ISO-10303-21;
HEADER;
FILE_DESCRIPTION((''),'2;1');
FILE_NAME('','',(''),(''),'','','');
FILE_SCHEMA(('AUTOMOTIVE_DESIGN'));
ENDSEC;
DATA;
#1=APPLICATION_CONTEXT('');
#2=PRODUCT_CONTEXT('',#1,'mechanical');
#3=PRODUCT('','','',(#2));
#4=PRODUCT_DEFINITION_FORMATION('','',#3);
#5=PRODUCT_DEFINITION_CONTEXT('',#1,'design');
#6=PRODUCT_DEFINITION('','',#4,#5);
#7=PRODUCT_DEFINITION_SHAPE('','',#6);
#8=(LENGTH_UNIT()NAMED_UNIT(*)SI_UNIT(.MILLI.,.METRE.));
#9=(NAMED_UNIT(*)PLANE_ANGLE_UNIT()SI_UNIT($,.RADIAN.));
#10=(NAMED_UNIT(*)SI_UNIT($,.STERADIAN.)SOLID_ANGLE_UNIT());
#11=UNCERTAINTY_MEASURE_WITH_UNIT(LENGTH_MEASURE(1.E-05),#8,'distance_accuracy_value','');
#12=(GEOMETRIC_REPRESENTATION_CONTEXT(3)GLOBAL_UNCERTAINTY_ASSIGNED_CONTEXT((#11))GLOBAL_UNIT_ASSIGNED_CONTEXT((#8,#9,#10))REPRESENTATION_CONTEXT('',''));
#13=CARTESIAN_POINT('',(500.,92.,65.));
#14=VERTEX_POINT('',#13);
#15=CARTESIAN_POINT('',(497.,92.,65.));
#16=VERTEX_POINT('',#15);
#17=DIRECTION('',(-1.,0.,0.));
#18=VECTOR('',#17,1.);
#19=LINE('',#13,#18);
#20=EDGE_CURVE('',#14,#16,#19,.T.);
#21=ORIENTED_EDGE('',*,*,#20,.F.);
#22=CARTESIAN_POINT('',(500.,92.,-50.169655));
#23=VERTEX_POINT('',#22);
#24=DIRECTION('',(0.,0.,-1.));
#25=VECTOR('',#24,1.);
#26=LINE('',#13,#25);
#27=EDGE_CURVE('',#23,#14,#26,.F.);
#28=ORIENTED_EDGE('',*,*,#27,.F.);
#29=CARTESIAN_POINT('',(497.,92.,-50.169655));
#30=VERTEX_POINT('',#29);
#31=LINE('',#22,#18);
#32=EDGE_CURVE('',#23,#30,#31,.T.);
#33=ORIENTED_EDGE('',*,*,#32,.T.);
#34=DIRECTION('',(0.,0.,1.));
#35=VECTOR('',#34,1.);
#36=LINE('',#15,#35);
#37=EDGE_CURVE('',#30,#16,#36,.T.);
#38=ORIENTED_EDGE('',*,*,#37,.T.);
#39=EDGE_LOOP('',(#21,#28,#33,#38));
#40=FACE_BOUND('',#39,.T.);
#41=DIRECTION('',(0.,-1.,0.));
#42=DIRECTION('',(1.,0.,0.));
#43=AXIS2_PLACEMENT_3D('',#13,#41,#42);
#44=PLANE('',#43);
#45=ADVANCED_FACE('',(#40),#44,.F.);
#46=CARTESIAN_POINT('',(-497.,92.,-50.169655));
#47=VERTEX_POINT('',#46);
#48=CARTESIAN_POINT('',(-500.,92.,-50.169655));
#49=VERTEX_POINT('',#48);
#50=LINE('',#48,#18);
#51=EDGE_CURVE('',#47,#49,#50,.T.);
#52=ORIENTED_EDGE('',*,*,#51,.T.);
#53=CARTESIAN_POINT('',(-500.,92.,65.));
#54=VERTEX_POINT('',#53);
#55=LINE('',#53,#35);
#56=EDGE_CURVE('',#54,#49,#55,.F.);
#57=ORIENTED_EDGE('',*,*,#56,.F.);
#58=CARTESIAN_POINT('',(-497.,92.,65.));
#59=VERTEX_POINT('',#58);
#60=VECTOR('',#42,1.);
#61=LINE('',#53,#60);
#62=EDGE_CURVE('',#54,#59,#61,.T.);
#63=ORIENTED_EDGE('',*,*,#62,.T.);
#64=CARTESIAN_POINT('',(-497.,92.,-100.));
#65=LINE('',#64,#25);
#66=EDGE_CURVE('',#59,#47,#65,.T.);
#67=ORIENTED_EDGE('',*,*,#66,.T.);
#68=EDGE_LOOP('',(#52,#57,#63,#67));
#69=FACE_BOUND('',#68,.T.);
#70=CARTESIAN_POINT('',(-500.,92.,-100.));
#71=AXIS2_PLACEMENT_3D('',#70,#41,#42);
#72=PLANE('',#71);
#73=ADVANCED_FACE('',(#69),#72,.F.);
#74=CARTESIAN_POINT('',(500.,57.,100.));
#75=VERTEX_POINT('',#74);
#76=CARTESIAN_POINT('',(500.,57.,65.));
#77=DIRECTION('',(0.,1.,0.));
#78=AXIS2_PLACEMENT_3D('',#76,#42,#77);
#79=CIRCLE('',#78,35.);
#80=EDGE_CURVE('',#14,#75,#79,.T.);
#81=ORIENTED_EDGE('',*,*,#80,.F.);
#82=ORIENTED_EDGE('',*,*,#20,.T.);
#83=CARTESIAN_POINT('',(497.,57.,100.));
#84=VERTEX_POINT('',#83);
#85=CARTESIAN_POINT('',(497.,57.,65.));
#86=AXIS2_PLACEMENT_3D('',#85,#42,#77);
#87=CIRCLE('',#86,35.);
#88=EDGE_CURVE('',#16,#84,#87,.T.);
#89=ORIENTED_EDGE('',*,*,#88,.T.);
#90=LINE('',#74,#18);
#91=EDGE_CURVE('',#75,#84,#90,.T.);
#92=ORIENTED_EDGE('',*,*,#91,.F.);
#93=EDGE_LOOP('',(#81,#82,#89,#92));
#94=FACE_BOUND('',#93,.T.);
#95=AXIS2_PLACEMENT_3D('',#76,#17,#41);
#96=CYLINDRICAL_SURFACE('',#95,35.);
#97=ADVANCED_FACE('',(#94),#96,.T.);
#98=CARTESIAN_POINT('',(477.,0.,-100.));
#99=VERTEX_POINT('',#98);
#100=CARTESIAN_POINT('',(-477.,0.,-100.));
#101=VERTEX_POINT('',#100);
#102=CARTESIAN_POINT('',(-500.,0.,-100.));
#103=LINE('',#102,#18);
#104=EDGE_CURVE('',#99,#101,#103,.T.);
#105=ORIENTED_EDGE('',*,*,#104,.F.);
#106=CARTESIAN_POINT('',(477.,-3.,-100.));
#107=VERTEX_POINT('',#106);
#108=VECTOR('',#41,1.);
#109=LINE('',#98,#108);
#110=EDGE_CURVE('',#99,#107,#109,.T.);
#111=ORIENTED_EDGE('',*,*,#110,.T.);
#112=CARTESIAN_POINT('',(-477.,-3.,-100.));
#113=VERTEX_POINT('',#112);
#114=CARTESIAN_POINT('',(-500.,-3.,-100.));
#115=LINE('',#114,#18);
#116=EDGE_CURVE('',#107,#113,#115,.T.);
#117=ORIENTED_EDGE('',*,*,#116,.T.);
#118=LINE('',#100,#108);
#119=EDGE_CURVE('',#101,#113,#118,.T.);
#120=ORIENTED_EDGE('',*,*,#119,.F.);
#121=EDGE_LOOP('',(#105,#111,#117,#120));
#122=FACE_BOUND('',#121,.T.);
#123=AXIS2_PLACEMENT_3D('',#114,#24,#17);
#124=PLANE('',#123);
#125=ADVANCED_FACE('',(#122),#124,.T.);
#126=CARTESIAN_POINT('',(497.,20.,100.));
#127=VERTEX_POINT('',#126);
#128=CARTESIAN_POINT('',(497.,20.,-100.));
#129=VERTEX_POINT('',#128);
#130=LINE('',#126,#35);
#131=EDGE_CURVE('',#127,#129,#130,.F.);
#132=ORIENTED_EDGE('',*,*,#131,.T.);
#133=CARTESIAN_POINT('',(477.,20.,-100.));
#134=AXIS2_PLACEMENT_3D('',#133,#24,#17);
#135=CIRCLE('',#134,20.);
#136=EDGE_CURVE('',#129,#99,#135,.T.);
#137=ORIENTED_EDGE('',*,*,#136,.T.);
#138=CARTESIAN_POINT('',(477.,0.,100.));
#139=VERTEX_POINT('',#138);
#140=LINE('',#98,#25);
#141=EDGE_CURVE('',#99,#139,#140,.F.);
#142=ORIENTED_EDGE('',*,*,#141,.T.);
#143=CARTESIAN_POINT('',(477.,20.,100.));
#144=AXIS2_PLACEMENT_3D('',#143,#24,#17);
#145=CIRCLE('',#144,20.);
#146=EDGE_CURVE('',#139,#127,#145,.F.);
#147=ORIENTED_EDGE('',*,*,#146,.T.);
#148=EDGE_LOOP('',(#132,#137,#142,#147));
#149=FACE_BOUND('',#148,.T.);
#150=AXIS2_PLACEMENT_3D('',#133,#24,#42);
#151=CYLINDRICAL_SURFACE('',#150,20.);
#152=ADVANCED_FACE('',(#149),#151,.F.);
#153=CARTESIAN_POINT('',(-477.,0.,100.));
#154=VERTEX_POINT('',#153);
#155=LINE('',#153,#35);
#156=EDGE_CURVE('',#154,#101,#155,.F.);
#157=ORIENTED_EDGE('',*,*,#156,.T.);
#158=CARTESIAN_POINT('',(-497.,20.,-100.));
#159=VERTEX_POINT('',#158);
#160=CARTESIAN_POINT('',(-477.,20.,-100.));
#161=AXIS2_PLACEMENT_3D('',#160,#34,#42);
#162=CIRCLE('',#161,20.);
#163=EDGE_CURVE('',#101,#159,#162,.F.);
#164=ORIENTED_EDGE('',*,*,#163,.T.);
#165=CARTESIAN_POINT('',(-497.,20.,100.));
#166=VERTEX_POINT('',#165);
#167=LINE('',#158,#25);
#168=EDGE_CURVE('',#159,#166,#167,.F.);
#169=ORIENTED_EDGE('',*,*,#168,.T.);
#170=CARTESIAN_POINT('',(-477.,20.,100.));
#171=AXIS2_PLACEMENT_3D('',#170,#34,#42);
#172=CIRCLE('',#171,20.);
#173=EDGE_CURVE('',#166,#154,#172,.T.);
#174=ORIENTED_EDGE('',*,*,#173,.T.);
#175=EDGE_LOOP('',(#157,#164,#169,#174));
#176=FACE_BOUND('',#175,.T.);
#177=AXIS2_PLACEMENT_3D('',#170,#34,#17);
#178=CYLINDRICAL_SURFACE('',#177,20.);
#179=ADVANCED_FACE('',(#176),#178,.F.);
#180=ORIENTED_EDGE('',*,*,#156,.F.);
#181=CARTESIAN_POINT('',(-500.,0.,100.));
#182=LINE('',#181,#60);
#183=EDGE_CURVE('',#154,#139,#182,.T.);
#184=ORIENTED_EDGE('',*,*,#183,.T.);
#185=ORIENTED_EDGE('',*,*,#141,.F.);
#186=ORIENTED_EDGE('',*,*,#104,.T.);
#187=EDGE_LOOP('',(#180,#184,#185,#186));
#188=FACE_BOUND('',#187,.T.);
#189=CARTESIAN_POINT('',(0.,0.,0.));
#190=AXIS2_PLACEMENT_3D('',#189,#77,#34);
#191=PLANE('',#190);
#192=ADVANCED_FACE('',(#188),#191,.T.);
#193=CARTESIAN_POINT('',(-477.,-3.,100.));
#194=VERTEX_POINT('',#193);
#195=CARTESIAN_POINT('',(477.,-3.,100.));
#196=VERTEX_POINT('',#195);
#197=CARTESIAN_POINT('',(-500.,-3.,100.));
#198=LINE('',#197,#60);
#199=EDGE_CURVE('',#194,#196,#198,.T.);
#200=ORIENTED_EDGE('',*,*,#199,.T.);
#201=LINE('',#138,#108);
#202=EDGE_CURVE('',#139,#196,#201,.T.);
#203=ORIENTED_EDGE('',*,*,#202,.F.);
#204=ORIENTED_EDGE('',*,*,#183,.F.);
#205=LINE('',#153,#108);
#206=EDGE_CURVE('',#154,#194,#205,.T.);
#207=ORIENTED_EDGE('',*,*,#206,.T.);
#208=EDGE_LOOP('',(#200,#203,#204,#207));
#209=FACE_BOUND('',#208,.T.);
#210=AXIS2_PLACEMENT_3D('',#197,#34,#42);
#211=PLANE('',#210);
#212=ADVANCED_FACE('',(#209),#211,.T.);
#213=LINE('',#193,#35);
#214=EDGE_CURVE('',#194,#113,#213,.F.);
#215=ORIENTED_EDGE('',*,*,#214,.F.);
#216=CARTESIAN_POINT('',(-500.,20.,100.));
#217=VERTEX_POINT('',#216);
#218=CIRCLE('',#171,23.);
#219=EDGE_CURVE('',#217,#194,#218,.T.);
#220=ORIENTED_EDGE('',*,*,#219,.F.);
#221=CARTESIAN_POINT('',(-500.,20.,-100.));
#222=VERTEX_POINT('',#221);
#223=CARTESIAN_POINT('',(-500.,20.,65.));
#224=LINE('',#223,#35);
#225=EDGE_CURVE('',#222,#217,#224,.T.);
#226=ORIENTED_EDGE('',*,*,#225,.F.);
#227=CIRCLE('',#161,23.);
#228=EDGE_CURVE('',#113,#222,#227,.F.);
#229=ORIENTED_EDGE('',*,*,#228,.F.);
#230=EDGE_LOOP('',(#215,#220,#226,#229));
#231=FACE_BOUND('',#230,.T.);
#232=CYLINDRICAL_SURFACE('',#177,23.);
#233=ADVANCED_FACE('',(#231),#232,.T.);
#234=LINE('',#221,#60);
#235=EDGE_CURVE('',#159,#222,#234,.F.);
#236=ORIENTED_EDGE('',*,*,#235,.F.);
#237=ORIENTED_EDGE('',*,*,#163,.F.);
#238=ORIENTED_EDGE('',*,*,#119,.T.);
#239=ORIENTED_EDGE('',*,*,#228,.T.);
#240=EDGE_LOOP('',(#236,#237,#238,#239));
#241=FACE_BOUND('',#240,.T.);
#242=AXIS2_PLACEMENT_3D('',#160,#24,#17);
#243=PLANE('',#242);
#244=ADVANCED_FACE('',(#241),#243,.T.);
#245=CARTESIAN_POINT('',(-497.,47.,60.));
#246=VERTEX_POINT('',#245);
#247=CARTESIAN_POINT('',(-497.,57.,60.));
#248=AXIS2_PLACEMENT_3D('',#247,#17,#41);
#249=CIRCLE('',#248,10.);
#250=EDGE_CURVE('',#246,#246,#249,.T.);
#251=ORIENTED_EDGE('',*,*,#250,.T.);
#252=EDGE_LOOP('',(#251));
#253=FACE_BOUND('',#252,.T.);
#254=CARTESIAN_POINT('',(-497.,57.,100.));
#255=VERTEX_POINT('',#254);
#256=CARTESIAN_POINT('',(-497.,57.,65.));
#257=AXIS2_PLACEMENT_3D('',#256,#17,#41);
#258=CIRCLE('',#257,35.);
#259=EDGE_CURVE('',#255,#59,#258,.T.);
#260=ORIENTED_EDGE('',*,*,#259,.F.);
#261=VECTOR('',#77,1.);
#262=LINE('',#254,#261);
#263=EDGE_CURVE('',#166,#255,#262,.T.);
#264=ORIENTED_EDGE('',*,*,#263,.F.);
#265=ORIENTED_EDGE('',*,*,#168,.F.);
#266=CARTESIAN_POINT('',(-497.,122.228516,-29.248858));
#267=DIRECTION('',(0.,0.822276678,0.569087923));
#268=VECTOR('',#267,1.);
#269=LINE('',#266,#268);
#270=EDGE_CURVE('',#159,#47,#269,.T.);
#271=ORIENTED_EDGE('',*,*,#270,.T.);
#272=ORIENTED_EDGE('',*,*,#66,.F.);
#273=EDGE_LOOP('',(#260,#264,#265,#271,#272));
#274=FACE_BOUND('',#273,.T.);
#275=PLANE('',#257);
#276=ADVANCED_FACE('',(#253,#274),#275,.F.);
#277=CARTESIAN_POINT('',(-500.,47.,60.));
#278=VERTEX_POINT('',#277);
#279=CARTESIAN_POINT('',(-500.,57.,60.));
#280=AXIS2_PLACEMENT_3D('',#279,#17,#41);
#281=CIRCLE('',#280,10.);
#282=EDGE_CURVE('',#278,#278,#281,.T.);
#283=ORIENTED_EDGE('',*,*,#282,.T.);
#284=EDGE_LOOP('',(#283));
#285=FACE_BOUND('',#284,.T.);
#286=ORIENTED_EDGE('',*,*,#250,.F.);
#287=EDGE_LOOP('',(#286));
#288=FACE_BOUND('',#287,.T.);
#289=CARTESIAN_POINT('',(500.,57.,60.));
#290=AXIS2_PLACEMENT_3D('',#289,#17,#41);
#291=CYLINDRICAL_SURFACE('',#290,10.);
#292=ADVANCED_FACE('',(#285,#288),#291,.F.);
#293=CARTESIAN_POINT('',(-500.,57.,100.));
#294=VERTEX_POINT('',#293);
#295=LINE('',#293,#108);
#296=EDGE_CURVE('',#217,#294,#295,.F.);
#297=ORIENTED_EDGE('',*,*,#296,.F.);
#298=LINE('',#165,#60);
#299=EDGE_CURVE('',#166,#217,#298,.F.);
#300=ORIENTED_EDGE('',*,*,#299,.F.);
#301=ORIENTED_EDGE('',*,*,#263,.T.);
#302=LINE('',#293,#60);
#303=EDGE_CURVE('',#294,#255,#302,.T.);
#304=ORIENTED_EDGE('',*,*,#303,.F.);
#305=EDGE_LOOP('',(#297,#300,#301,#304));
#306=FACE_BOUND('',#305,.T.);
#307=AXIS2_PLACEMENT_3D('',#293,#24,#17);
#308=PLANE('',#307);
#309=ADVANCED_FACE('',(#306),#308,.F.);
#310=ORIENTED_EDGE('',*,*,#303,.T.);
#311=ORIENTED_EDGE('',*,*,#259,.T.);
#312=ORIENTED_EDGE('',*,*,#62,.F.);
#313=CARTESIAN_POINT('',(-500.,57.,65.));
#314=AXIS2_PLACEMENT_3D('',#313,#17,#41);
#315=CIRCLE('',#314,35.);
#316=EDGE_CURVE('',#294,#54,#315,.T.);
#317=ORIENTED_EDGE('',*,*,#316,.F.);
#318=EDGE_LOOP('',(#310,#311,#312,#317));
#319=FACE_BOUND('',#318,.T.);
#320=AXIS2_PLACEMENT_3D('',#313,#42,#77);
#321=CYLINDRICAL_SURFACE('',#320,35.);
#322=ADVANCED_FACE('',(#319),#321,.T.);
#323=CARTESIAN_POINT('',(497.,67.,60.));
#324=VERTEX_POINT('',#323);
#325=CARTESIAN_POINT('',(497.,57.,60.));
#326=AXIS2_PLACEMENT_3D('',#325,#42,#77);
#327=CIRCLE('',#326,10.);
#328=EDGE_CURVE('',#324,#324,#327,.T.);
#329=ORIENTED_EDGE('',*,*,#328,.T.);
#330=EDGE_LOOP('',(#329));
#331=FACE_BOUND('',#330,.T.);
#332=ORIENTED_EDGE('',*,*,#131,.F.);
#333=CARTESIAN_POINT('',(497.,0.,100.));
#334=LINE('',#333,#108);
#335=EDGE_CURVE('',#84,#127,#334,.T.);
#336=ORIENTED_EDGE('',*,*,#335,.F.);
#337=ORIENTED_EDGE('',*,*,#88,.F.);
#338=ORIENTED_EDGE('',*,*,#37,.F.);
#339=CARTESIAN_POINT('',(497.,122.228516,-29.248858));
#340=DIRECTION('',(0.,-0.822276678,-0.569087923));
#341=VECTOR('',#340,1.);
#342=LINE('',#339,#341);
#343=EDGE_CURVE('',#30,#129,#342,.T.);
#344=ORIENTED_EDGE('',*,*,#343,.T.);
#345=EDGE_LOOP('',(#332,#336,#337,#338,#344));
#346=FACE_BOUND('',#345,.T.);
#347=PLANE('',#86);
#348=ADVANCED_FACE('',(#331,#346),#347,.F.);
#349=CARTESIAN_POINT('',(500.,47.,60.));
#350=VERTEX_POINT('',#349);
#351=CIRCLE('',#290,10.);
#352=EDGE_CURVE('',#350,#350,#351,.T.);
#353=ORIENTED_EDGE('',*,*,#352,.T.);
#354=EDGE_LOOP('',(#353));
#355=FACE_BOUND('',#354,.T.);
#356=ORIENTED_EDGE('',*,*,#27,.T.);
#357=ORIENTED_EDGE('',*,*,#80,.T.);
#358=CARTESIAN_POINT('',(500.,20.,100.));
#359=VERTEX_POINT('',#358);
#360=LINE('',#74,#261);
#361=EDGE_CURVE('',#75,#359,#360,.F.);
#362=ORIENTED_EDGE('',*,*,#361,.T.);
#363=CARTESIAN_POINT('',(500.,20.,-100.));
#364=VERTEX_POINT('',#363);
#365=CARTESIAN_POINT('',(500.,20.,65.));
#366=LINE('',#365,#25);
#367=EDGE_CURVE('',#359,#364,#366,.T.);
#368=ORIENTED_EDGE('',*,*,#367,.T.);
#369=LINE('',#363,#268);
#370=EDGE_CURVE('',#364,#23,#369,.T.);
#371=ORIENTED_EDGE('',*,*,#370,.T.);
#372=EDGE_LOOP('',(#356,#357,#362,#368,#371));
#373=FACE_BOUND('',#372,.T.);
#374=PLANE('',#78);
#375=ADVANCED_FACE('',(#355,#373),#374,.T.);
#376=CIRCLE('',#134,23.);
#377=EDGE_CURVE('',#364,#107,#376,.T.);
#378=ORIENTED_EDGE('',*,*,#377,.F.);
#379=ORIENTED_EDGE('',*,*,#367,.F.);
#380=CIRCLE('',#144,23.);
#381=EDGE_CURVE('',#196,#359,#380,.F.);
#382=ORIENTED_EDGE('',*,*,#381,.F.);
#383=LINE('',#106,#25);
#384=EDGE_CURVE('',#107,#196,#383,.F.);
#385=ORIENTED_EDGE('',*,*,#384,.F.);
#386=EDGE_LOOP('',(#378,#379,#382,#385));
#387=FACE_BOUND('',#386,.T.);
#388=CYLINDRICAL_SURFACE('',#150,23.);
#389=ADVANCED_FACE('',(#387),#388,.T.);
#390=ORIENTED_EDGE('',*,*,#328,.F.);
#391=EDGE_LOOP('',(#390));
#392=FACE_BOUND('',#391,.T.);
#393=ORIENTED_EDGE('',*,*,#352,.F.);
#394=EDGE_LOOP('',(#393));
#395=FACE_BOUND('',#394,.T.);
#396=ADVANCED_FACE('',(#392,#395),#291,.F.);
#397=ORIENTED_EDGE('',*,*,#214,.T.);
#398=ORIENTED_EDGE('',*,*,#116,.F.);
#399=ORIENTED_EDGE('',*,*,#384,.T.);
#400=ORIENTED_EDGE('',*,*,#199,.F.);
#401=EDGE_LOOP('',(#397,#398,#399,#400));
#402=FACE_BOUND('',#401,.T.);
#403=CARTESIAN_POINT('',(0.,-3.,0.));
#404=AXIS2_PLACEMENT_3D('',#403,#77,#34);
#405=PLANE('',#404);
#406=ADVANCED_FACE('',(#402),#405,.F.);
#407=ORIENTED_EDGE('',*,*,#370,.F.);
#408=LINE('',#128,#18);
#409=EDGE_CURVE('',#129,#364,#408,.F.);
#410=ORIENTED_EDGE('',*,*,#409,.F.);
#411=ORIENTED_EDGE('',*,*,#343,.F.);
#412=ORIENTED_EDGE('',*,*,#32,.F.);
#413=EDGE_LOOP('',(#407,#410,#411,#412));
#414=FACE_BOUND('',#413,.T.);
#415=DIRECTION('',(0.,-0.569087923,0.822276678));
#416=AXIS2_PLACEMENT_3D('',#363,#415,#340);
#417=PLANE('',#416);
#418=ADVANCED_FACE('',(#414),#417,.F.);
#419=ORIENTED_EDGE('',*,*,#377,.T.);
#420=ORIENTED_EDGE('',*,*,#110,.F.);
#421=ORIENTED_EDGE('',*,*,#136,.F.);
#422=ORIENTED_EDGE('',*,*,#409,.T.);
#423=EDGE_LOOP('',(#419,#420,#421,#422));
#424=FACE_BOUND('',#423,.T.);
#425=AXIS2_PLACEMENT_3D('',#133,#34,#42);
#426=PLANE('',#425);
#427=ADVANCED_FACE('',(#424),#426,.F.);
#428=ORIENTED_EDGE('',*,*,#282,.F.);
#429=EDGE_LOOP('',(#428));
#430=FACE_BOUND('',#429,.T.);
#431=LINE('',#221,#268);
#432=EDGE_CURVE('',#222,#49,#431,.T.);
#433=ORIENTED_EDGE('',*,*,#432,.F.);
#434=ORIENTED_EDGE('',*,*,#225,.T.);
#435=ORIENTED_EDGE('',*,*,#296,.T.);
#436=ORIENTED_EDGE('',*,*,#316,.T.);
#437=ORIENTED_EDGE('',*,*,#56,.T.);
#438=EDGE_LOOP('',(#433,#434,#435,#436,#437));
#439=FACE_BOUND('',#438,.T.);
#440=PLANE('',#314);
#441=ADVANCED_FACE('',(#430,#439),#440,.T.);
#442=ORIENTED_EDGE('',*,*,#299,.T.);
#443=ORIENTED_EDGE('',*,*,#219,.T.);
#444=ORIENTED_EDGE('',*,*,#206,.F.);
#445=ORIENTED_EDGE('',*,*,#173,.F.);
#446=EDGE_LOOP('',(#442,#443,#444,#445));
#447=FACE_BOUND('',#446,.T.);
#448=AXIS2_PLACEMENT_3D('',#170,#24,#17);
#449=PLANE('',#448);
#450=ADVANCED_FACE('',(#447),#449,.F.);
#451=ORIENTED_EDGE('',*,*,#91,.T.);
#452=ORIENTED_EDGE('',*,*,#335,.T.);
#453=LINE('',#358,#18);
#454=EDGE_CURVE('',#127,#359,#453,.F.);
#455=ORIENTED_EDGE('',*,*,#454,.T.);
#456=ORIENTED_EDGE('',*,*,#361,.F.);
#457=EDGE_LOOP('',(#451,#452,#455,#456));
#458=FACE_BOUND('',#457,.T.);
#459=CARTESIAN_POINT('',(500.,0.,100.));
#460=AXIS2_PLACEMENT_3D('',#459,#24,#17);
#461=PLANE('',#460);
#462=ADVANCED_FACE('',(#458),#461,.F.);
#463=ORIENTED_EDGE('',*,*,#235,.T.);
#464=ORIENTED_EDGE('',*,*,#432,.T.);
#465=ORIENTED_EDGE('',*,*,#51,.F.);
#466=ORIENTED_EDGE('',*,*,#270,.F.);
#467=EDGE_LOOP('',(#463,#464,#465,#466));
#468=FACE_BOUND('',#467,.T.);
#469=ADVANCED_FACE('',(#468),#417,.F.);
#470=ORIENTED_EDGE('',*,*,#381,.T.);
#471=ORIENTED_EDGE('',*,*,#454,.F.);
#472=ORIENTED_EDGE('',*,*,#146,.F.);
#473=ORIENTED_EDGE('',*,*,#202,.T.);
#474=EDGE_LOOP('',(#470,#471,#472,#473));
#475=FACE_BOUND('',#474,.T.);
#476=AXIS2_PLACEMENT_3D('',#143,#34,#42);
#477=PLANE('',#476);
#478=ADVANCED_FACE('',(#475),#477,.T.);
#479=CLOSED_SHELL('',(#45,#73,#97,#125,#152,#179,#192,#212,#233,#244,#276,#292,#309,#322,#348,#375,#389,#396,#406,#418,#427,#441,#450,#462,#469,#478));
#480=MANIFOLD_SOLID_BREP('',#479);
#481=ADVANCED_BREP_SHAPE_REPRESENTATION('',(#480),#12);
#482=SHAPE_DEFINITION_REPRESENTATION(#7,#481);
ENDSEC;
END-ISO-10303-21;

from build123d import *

# Parameters (mm, degrees)
SKETCH1_W                    = 1000
SKETCH1_H                    = 200
BASE_FLANGE1_DEPTH           = 3
EDGE_FLANGE1_STRIP_W         = 52
EDGE_FLANGE1_STRIP_H         = 3
EDGE_FLANGE1_STRIP_CUT_DEPTH = 200
EDGE_FLANGE1_DEPTH           = 200
EDGE_FLANGE1_FLAT_DEPTH      = 3
EDGE_FLANGE2_STRIP_W         = 52
EDGE_FLANGE2_STRIP_H         = 3
EDGE_FLANGE2_STRIP_CUT_DEPTH = 200
EDGE_FLANGE2_DEPTH           = 200
EDGE_FLANGE2_FLAT_DEPTH      = 3
SKETCH13_R                   = 10
CUT_EXTRUDE1_DEPTH           = 1010.189774027


# Sheet-metal steps are written as plain solids
with BuildPart() as part:
    # Sketch1 → Base-Flange1 (new body)
    with BuildSketch(Plane(origin=(0, 0, 0), x_dir=(1, 0, 0), z_dir=(0, 1, 0))):
        Rectangle(SKETCH1_W, SKETCH1_H)
    extrude(amount=-BASE_FLANGE1_DEPTH)

    # Edge-Flange1 strip (across the edge) → Edge-Flange1 strip cut (cut)
    with BuildSketch(Plane(origin=(-500, 0, -100), x_dir=(1, 0, 0), z_dir=(0, 0, 1))):
        with Locations((-3, -1.5)):
            Rectangle(EDGE_FLANGE1_STRIP_W, EDGE_FLANGE1_STRIP_H)
    extrude(amount=EDGE_FLANGE1_STRIP_CUT_DEPTH, mode=Mode.SUBTRACT)

    # Edge-Flange1 bend section (across the edge) → Edge-Flange1 (add)
    with BuildSketch(Plane(origin=(-500, 0, -100), x_dir=(1, 0, 0), z_dir=(0, 0, 1))):
        with BuildLine():
            Line((0, 20), (3, 20))
            ThreePointArc((3, 20), (8.857864376, 5.857864376), (23, 0))
            Line((23, 0), (23, -3))
            ThreePointArc((23, -3), (6.736544033, 3.736544033), (0, 20))
        make_face()
    extrude(amount=EDGE_FLANGE1_DEPTH)

    # Edge-Flange1 profile (on flange) → Edge-Flange1 flat (add)
    with BuildSketch(Plane.ZY.offset(500)):
        with BuildLine():
            Line((-100, 92), (-100, 20))
            Line((-100, 20), (100, 20))
            Line((100, 20), (100, 57))
            ThreePointArc((100, 57), (89.748737342, 81.748737342), (65, 92))
            Line((65, 92), (-100, 92))
        make_face()
    extrude(amount=-EDGE_FLANGE1_FLAT_DEPTH)

    # Edge-Flange2 strip (across the edge) → Edge-Flange2 strip cut (cut)
    with BuildSketch(Plane(origin=(500, 0, 100), x_dir=(-1, 0, 0), z_dir=(0, 0, -1))):
        with Locations((-3, -1.5)):
            Rectangle(EDGE_FLANGE2_STRIP_W, EDGE_FLANGE2_STRIP_H)
    extrude(amount=EDGE_FLANGE2_STRIP_CUT_DEPTH, mode=Mode.SUBTRACT)

    # Edge-Flange2 bend section (across the edge) → Edge-Flange2 (add)
    with BuildSketch(Plane(origin=(500, 0, 100), x_dir=(-1, 0, 0), z_dir=(0, 0, -1))):
        with BuildLine():
            Line((0, 20), (3, 20))
            ThreePointArc((3, 20), (8.857864376, 5.857864376), (23, 0))
            Line((23, 0), (23, -3))
            ThreePointArc((23, -3), (6.736544033, 3.736544033), (0, 20))
        make_face()
    extrude(amount=EDGE_FLANGE2_DEPTH)

    # Edge-Flange2 profile (on flange) → Edge-Flange2 flat (add)
    with BuildSketch(Plane(origin=(500, 0, 0), x_dir=(0, 0, -1), z_dir=(1, 0, 0))):
        with BuildLine():
            Line((100, 92), (-65, 92))
            ThreePointArc((-65, 92), (-89.748737342, 81.748737342), (-100, 57))
            Line((-100, 57), (-100, 20))
            Line((-100, 20), (100, 20))
            Line((100, 20), (100, 92))
        make_face()
    extrude(amount=-EDGE_FLANGE2_FLAT_DEPTH)

    # Sketch13 → Cut-Extrude1 (cut, through all)
    with BuildSketch(Plane.ZY.offset(500)):
        with Locations(Location((60, 57, 0), (0, 0, 270))):
            Circle(SKETCH13_R)
        Polygon((-100, 20), (-50, 92.245135124), (-100, 92), align=None)
    extrude(amount=-CUT_EXTRUDE1_DEPTH, mode=Mode.SUBTRACT)


solid = part.part
